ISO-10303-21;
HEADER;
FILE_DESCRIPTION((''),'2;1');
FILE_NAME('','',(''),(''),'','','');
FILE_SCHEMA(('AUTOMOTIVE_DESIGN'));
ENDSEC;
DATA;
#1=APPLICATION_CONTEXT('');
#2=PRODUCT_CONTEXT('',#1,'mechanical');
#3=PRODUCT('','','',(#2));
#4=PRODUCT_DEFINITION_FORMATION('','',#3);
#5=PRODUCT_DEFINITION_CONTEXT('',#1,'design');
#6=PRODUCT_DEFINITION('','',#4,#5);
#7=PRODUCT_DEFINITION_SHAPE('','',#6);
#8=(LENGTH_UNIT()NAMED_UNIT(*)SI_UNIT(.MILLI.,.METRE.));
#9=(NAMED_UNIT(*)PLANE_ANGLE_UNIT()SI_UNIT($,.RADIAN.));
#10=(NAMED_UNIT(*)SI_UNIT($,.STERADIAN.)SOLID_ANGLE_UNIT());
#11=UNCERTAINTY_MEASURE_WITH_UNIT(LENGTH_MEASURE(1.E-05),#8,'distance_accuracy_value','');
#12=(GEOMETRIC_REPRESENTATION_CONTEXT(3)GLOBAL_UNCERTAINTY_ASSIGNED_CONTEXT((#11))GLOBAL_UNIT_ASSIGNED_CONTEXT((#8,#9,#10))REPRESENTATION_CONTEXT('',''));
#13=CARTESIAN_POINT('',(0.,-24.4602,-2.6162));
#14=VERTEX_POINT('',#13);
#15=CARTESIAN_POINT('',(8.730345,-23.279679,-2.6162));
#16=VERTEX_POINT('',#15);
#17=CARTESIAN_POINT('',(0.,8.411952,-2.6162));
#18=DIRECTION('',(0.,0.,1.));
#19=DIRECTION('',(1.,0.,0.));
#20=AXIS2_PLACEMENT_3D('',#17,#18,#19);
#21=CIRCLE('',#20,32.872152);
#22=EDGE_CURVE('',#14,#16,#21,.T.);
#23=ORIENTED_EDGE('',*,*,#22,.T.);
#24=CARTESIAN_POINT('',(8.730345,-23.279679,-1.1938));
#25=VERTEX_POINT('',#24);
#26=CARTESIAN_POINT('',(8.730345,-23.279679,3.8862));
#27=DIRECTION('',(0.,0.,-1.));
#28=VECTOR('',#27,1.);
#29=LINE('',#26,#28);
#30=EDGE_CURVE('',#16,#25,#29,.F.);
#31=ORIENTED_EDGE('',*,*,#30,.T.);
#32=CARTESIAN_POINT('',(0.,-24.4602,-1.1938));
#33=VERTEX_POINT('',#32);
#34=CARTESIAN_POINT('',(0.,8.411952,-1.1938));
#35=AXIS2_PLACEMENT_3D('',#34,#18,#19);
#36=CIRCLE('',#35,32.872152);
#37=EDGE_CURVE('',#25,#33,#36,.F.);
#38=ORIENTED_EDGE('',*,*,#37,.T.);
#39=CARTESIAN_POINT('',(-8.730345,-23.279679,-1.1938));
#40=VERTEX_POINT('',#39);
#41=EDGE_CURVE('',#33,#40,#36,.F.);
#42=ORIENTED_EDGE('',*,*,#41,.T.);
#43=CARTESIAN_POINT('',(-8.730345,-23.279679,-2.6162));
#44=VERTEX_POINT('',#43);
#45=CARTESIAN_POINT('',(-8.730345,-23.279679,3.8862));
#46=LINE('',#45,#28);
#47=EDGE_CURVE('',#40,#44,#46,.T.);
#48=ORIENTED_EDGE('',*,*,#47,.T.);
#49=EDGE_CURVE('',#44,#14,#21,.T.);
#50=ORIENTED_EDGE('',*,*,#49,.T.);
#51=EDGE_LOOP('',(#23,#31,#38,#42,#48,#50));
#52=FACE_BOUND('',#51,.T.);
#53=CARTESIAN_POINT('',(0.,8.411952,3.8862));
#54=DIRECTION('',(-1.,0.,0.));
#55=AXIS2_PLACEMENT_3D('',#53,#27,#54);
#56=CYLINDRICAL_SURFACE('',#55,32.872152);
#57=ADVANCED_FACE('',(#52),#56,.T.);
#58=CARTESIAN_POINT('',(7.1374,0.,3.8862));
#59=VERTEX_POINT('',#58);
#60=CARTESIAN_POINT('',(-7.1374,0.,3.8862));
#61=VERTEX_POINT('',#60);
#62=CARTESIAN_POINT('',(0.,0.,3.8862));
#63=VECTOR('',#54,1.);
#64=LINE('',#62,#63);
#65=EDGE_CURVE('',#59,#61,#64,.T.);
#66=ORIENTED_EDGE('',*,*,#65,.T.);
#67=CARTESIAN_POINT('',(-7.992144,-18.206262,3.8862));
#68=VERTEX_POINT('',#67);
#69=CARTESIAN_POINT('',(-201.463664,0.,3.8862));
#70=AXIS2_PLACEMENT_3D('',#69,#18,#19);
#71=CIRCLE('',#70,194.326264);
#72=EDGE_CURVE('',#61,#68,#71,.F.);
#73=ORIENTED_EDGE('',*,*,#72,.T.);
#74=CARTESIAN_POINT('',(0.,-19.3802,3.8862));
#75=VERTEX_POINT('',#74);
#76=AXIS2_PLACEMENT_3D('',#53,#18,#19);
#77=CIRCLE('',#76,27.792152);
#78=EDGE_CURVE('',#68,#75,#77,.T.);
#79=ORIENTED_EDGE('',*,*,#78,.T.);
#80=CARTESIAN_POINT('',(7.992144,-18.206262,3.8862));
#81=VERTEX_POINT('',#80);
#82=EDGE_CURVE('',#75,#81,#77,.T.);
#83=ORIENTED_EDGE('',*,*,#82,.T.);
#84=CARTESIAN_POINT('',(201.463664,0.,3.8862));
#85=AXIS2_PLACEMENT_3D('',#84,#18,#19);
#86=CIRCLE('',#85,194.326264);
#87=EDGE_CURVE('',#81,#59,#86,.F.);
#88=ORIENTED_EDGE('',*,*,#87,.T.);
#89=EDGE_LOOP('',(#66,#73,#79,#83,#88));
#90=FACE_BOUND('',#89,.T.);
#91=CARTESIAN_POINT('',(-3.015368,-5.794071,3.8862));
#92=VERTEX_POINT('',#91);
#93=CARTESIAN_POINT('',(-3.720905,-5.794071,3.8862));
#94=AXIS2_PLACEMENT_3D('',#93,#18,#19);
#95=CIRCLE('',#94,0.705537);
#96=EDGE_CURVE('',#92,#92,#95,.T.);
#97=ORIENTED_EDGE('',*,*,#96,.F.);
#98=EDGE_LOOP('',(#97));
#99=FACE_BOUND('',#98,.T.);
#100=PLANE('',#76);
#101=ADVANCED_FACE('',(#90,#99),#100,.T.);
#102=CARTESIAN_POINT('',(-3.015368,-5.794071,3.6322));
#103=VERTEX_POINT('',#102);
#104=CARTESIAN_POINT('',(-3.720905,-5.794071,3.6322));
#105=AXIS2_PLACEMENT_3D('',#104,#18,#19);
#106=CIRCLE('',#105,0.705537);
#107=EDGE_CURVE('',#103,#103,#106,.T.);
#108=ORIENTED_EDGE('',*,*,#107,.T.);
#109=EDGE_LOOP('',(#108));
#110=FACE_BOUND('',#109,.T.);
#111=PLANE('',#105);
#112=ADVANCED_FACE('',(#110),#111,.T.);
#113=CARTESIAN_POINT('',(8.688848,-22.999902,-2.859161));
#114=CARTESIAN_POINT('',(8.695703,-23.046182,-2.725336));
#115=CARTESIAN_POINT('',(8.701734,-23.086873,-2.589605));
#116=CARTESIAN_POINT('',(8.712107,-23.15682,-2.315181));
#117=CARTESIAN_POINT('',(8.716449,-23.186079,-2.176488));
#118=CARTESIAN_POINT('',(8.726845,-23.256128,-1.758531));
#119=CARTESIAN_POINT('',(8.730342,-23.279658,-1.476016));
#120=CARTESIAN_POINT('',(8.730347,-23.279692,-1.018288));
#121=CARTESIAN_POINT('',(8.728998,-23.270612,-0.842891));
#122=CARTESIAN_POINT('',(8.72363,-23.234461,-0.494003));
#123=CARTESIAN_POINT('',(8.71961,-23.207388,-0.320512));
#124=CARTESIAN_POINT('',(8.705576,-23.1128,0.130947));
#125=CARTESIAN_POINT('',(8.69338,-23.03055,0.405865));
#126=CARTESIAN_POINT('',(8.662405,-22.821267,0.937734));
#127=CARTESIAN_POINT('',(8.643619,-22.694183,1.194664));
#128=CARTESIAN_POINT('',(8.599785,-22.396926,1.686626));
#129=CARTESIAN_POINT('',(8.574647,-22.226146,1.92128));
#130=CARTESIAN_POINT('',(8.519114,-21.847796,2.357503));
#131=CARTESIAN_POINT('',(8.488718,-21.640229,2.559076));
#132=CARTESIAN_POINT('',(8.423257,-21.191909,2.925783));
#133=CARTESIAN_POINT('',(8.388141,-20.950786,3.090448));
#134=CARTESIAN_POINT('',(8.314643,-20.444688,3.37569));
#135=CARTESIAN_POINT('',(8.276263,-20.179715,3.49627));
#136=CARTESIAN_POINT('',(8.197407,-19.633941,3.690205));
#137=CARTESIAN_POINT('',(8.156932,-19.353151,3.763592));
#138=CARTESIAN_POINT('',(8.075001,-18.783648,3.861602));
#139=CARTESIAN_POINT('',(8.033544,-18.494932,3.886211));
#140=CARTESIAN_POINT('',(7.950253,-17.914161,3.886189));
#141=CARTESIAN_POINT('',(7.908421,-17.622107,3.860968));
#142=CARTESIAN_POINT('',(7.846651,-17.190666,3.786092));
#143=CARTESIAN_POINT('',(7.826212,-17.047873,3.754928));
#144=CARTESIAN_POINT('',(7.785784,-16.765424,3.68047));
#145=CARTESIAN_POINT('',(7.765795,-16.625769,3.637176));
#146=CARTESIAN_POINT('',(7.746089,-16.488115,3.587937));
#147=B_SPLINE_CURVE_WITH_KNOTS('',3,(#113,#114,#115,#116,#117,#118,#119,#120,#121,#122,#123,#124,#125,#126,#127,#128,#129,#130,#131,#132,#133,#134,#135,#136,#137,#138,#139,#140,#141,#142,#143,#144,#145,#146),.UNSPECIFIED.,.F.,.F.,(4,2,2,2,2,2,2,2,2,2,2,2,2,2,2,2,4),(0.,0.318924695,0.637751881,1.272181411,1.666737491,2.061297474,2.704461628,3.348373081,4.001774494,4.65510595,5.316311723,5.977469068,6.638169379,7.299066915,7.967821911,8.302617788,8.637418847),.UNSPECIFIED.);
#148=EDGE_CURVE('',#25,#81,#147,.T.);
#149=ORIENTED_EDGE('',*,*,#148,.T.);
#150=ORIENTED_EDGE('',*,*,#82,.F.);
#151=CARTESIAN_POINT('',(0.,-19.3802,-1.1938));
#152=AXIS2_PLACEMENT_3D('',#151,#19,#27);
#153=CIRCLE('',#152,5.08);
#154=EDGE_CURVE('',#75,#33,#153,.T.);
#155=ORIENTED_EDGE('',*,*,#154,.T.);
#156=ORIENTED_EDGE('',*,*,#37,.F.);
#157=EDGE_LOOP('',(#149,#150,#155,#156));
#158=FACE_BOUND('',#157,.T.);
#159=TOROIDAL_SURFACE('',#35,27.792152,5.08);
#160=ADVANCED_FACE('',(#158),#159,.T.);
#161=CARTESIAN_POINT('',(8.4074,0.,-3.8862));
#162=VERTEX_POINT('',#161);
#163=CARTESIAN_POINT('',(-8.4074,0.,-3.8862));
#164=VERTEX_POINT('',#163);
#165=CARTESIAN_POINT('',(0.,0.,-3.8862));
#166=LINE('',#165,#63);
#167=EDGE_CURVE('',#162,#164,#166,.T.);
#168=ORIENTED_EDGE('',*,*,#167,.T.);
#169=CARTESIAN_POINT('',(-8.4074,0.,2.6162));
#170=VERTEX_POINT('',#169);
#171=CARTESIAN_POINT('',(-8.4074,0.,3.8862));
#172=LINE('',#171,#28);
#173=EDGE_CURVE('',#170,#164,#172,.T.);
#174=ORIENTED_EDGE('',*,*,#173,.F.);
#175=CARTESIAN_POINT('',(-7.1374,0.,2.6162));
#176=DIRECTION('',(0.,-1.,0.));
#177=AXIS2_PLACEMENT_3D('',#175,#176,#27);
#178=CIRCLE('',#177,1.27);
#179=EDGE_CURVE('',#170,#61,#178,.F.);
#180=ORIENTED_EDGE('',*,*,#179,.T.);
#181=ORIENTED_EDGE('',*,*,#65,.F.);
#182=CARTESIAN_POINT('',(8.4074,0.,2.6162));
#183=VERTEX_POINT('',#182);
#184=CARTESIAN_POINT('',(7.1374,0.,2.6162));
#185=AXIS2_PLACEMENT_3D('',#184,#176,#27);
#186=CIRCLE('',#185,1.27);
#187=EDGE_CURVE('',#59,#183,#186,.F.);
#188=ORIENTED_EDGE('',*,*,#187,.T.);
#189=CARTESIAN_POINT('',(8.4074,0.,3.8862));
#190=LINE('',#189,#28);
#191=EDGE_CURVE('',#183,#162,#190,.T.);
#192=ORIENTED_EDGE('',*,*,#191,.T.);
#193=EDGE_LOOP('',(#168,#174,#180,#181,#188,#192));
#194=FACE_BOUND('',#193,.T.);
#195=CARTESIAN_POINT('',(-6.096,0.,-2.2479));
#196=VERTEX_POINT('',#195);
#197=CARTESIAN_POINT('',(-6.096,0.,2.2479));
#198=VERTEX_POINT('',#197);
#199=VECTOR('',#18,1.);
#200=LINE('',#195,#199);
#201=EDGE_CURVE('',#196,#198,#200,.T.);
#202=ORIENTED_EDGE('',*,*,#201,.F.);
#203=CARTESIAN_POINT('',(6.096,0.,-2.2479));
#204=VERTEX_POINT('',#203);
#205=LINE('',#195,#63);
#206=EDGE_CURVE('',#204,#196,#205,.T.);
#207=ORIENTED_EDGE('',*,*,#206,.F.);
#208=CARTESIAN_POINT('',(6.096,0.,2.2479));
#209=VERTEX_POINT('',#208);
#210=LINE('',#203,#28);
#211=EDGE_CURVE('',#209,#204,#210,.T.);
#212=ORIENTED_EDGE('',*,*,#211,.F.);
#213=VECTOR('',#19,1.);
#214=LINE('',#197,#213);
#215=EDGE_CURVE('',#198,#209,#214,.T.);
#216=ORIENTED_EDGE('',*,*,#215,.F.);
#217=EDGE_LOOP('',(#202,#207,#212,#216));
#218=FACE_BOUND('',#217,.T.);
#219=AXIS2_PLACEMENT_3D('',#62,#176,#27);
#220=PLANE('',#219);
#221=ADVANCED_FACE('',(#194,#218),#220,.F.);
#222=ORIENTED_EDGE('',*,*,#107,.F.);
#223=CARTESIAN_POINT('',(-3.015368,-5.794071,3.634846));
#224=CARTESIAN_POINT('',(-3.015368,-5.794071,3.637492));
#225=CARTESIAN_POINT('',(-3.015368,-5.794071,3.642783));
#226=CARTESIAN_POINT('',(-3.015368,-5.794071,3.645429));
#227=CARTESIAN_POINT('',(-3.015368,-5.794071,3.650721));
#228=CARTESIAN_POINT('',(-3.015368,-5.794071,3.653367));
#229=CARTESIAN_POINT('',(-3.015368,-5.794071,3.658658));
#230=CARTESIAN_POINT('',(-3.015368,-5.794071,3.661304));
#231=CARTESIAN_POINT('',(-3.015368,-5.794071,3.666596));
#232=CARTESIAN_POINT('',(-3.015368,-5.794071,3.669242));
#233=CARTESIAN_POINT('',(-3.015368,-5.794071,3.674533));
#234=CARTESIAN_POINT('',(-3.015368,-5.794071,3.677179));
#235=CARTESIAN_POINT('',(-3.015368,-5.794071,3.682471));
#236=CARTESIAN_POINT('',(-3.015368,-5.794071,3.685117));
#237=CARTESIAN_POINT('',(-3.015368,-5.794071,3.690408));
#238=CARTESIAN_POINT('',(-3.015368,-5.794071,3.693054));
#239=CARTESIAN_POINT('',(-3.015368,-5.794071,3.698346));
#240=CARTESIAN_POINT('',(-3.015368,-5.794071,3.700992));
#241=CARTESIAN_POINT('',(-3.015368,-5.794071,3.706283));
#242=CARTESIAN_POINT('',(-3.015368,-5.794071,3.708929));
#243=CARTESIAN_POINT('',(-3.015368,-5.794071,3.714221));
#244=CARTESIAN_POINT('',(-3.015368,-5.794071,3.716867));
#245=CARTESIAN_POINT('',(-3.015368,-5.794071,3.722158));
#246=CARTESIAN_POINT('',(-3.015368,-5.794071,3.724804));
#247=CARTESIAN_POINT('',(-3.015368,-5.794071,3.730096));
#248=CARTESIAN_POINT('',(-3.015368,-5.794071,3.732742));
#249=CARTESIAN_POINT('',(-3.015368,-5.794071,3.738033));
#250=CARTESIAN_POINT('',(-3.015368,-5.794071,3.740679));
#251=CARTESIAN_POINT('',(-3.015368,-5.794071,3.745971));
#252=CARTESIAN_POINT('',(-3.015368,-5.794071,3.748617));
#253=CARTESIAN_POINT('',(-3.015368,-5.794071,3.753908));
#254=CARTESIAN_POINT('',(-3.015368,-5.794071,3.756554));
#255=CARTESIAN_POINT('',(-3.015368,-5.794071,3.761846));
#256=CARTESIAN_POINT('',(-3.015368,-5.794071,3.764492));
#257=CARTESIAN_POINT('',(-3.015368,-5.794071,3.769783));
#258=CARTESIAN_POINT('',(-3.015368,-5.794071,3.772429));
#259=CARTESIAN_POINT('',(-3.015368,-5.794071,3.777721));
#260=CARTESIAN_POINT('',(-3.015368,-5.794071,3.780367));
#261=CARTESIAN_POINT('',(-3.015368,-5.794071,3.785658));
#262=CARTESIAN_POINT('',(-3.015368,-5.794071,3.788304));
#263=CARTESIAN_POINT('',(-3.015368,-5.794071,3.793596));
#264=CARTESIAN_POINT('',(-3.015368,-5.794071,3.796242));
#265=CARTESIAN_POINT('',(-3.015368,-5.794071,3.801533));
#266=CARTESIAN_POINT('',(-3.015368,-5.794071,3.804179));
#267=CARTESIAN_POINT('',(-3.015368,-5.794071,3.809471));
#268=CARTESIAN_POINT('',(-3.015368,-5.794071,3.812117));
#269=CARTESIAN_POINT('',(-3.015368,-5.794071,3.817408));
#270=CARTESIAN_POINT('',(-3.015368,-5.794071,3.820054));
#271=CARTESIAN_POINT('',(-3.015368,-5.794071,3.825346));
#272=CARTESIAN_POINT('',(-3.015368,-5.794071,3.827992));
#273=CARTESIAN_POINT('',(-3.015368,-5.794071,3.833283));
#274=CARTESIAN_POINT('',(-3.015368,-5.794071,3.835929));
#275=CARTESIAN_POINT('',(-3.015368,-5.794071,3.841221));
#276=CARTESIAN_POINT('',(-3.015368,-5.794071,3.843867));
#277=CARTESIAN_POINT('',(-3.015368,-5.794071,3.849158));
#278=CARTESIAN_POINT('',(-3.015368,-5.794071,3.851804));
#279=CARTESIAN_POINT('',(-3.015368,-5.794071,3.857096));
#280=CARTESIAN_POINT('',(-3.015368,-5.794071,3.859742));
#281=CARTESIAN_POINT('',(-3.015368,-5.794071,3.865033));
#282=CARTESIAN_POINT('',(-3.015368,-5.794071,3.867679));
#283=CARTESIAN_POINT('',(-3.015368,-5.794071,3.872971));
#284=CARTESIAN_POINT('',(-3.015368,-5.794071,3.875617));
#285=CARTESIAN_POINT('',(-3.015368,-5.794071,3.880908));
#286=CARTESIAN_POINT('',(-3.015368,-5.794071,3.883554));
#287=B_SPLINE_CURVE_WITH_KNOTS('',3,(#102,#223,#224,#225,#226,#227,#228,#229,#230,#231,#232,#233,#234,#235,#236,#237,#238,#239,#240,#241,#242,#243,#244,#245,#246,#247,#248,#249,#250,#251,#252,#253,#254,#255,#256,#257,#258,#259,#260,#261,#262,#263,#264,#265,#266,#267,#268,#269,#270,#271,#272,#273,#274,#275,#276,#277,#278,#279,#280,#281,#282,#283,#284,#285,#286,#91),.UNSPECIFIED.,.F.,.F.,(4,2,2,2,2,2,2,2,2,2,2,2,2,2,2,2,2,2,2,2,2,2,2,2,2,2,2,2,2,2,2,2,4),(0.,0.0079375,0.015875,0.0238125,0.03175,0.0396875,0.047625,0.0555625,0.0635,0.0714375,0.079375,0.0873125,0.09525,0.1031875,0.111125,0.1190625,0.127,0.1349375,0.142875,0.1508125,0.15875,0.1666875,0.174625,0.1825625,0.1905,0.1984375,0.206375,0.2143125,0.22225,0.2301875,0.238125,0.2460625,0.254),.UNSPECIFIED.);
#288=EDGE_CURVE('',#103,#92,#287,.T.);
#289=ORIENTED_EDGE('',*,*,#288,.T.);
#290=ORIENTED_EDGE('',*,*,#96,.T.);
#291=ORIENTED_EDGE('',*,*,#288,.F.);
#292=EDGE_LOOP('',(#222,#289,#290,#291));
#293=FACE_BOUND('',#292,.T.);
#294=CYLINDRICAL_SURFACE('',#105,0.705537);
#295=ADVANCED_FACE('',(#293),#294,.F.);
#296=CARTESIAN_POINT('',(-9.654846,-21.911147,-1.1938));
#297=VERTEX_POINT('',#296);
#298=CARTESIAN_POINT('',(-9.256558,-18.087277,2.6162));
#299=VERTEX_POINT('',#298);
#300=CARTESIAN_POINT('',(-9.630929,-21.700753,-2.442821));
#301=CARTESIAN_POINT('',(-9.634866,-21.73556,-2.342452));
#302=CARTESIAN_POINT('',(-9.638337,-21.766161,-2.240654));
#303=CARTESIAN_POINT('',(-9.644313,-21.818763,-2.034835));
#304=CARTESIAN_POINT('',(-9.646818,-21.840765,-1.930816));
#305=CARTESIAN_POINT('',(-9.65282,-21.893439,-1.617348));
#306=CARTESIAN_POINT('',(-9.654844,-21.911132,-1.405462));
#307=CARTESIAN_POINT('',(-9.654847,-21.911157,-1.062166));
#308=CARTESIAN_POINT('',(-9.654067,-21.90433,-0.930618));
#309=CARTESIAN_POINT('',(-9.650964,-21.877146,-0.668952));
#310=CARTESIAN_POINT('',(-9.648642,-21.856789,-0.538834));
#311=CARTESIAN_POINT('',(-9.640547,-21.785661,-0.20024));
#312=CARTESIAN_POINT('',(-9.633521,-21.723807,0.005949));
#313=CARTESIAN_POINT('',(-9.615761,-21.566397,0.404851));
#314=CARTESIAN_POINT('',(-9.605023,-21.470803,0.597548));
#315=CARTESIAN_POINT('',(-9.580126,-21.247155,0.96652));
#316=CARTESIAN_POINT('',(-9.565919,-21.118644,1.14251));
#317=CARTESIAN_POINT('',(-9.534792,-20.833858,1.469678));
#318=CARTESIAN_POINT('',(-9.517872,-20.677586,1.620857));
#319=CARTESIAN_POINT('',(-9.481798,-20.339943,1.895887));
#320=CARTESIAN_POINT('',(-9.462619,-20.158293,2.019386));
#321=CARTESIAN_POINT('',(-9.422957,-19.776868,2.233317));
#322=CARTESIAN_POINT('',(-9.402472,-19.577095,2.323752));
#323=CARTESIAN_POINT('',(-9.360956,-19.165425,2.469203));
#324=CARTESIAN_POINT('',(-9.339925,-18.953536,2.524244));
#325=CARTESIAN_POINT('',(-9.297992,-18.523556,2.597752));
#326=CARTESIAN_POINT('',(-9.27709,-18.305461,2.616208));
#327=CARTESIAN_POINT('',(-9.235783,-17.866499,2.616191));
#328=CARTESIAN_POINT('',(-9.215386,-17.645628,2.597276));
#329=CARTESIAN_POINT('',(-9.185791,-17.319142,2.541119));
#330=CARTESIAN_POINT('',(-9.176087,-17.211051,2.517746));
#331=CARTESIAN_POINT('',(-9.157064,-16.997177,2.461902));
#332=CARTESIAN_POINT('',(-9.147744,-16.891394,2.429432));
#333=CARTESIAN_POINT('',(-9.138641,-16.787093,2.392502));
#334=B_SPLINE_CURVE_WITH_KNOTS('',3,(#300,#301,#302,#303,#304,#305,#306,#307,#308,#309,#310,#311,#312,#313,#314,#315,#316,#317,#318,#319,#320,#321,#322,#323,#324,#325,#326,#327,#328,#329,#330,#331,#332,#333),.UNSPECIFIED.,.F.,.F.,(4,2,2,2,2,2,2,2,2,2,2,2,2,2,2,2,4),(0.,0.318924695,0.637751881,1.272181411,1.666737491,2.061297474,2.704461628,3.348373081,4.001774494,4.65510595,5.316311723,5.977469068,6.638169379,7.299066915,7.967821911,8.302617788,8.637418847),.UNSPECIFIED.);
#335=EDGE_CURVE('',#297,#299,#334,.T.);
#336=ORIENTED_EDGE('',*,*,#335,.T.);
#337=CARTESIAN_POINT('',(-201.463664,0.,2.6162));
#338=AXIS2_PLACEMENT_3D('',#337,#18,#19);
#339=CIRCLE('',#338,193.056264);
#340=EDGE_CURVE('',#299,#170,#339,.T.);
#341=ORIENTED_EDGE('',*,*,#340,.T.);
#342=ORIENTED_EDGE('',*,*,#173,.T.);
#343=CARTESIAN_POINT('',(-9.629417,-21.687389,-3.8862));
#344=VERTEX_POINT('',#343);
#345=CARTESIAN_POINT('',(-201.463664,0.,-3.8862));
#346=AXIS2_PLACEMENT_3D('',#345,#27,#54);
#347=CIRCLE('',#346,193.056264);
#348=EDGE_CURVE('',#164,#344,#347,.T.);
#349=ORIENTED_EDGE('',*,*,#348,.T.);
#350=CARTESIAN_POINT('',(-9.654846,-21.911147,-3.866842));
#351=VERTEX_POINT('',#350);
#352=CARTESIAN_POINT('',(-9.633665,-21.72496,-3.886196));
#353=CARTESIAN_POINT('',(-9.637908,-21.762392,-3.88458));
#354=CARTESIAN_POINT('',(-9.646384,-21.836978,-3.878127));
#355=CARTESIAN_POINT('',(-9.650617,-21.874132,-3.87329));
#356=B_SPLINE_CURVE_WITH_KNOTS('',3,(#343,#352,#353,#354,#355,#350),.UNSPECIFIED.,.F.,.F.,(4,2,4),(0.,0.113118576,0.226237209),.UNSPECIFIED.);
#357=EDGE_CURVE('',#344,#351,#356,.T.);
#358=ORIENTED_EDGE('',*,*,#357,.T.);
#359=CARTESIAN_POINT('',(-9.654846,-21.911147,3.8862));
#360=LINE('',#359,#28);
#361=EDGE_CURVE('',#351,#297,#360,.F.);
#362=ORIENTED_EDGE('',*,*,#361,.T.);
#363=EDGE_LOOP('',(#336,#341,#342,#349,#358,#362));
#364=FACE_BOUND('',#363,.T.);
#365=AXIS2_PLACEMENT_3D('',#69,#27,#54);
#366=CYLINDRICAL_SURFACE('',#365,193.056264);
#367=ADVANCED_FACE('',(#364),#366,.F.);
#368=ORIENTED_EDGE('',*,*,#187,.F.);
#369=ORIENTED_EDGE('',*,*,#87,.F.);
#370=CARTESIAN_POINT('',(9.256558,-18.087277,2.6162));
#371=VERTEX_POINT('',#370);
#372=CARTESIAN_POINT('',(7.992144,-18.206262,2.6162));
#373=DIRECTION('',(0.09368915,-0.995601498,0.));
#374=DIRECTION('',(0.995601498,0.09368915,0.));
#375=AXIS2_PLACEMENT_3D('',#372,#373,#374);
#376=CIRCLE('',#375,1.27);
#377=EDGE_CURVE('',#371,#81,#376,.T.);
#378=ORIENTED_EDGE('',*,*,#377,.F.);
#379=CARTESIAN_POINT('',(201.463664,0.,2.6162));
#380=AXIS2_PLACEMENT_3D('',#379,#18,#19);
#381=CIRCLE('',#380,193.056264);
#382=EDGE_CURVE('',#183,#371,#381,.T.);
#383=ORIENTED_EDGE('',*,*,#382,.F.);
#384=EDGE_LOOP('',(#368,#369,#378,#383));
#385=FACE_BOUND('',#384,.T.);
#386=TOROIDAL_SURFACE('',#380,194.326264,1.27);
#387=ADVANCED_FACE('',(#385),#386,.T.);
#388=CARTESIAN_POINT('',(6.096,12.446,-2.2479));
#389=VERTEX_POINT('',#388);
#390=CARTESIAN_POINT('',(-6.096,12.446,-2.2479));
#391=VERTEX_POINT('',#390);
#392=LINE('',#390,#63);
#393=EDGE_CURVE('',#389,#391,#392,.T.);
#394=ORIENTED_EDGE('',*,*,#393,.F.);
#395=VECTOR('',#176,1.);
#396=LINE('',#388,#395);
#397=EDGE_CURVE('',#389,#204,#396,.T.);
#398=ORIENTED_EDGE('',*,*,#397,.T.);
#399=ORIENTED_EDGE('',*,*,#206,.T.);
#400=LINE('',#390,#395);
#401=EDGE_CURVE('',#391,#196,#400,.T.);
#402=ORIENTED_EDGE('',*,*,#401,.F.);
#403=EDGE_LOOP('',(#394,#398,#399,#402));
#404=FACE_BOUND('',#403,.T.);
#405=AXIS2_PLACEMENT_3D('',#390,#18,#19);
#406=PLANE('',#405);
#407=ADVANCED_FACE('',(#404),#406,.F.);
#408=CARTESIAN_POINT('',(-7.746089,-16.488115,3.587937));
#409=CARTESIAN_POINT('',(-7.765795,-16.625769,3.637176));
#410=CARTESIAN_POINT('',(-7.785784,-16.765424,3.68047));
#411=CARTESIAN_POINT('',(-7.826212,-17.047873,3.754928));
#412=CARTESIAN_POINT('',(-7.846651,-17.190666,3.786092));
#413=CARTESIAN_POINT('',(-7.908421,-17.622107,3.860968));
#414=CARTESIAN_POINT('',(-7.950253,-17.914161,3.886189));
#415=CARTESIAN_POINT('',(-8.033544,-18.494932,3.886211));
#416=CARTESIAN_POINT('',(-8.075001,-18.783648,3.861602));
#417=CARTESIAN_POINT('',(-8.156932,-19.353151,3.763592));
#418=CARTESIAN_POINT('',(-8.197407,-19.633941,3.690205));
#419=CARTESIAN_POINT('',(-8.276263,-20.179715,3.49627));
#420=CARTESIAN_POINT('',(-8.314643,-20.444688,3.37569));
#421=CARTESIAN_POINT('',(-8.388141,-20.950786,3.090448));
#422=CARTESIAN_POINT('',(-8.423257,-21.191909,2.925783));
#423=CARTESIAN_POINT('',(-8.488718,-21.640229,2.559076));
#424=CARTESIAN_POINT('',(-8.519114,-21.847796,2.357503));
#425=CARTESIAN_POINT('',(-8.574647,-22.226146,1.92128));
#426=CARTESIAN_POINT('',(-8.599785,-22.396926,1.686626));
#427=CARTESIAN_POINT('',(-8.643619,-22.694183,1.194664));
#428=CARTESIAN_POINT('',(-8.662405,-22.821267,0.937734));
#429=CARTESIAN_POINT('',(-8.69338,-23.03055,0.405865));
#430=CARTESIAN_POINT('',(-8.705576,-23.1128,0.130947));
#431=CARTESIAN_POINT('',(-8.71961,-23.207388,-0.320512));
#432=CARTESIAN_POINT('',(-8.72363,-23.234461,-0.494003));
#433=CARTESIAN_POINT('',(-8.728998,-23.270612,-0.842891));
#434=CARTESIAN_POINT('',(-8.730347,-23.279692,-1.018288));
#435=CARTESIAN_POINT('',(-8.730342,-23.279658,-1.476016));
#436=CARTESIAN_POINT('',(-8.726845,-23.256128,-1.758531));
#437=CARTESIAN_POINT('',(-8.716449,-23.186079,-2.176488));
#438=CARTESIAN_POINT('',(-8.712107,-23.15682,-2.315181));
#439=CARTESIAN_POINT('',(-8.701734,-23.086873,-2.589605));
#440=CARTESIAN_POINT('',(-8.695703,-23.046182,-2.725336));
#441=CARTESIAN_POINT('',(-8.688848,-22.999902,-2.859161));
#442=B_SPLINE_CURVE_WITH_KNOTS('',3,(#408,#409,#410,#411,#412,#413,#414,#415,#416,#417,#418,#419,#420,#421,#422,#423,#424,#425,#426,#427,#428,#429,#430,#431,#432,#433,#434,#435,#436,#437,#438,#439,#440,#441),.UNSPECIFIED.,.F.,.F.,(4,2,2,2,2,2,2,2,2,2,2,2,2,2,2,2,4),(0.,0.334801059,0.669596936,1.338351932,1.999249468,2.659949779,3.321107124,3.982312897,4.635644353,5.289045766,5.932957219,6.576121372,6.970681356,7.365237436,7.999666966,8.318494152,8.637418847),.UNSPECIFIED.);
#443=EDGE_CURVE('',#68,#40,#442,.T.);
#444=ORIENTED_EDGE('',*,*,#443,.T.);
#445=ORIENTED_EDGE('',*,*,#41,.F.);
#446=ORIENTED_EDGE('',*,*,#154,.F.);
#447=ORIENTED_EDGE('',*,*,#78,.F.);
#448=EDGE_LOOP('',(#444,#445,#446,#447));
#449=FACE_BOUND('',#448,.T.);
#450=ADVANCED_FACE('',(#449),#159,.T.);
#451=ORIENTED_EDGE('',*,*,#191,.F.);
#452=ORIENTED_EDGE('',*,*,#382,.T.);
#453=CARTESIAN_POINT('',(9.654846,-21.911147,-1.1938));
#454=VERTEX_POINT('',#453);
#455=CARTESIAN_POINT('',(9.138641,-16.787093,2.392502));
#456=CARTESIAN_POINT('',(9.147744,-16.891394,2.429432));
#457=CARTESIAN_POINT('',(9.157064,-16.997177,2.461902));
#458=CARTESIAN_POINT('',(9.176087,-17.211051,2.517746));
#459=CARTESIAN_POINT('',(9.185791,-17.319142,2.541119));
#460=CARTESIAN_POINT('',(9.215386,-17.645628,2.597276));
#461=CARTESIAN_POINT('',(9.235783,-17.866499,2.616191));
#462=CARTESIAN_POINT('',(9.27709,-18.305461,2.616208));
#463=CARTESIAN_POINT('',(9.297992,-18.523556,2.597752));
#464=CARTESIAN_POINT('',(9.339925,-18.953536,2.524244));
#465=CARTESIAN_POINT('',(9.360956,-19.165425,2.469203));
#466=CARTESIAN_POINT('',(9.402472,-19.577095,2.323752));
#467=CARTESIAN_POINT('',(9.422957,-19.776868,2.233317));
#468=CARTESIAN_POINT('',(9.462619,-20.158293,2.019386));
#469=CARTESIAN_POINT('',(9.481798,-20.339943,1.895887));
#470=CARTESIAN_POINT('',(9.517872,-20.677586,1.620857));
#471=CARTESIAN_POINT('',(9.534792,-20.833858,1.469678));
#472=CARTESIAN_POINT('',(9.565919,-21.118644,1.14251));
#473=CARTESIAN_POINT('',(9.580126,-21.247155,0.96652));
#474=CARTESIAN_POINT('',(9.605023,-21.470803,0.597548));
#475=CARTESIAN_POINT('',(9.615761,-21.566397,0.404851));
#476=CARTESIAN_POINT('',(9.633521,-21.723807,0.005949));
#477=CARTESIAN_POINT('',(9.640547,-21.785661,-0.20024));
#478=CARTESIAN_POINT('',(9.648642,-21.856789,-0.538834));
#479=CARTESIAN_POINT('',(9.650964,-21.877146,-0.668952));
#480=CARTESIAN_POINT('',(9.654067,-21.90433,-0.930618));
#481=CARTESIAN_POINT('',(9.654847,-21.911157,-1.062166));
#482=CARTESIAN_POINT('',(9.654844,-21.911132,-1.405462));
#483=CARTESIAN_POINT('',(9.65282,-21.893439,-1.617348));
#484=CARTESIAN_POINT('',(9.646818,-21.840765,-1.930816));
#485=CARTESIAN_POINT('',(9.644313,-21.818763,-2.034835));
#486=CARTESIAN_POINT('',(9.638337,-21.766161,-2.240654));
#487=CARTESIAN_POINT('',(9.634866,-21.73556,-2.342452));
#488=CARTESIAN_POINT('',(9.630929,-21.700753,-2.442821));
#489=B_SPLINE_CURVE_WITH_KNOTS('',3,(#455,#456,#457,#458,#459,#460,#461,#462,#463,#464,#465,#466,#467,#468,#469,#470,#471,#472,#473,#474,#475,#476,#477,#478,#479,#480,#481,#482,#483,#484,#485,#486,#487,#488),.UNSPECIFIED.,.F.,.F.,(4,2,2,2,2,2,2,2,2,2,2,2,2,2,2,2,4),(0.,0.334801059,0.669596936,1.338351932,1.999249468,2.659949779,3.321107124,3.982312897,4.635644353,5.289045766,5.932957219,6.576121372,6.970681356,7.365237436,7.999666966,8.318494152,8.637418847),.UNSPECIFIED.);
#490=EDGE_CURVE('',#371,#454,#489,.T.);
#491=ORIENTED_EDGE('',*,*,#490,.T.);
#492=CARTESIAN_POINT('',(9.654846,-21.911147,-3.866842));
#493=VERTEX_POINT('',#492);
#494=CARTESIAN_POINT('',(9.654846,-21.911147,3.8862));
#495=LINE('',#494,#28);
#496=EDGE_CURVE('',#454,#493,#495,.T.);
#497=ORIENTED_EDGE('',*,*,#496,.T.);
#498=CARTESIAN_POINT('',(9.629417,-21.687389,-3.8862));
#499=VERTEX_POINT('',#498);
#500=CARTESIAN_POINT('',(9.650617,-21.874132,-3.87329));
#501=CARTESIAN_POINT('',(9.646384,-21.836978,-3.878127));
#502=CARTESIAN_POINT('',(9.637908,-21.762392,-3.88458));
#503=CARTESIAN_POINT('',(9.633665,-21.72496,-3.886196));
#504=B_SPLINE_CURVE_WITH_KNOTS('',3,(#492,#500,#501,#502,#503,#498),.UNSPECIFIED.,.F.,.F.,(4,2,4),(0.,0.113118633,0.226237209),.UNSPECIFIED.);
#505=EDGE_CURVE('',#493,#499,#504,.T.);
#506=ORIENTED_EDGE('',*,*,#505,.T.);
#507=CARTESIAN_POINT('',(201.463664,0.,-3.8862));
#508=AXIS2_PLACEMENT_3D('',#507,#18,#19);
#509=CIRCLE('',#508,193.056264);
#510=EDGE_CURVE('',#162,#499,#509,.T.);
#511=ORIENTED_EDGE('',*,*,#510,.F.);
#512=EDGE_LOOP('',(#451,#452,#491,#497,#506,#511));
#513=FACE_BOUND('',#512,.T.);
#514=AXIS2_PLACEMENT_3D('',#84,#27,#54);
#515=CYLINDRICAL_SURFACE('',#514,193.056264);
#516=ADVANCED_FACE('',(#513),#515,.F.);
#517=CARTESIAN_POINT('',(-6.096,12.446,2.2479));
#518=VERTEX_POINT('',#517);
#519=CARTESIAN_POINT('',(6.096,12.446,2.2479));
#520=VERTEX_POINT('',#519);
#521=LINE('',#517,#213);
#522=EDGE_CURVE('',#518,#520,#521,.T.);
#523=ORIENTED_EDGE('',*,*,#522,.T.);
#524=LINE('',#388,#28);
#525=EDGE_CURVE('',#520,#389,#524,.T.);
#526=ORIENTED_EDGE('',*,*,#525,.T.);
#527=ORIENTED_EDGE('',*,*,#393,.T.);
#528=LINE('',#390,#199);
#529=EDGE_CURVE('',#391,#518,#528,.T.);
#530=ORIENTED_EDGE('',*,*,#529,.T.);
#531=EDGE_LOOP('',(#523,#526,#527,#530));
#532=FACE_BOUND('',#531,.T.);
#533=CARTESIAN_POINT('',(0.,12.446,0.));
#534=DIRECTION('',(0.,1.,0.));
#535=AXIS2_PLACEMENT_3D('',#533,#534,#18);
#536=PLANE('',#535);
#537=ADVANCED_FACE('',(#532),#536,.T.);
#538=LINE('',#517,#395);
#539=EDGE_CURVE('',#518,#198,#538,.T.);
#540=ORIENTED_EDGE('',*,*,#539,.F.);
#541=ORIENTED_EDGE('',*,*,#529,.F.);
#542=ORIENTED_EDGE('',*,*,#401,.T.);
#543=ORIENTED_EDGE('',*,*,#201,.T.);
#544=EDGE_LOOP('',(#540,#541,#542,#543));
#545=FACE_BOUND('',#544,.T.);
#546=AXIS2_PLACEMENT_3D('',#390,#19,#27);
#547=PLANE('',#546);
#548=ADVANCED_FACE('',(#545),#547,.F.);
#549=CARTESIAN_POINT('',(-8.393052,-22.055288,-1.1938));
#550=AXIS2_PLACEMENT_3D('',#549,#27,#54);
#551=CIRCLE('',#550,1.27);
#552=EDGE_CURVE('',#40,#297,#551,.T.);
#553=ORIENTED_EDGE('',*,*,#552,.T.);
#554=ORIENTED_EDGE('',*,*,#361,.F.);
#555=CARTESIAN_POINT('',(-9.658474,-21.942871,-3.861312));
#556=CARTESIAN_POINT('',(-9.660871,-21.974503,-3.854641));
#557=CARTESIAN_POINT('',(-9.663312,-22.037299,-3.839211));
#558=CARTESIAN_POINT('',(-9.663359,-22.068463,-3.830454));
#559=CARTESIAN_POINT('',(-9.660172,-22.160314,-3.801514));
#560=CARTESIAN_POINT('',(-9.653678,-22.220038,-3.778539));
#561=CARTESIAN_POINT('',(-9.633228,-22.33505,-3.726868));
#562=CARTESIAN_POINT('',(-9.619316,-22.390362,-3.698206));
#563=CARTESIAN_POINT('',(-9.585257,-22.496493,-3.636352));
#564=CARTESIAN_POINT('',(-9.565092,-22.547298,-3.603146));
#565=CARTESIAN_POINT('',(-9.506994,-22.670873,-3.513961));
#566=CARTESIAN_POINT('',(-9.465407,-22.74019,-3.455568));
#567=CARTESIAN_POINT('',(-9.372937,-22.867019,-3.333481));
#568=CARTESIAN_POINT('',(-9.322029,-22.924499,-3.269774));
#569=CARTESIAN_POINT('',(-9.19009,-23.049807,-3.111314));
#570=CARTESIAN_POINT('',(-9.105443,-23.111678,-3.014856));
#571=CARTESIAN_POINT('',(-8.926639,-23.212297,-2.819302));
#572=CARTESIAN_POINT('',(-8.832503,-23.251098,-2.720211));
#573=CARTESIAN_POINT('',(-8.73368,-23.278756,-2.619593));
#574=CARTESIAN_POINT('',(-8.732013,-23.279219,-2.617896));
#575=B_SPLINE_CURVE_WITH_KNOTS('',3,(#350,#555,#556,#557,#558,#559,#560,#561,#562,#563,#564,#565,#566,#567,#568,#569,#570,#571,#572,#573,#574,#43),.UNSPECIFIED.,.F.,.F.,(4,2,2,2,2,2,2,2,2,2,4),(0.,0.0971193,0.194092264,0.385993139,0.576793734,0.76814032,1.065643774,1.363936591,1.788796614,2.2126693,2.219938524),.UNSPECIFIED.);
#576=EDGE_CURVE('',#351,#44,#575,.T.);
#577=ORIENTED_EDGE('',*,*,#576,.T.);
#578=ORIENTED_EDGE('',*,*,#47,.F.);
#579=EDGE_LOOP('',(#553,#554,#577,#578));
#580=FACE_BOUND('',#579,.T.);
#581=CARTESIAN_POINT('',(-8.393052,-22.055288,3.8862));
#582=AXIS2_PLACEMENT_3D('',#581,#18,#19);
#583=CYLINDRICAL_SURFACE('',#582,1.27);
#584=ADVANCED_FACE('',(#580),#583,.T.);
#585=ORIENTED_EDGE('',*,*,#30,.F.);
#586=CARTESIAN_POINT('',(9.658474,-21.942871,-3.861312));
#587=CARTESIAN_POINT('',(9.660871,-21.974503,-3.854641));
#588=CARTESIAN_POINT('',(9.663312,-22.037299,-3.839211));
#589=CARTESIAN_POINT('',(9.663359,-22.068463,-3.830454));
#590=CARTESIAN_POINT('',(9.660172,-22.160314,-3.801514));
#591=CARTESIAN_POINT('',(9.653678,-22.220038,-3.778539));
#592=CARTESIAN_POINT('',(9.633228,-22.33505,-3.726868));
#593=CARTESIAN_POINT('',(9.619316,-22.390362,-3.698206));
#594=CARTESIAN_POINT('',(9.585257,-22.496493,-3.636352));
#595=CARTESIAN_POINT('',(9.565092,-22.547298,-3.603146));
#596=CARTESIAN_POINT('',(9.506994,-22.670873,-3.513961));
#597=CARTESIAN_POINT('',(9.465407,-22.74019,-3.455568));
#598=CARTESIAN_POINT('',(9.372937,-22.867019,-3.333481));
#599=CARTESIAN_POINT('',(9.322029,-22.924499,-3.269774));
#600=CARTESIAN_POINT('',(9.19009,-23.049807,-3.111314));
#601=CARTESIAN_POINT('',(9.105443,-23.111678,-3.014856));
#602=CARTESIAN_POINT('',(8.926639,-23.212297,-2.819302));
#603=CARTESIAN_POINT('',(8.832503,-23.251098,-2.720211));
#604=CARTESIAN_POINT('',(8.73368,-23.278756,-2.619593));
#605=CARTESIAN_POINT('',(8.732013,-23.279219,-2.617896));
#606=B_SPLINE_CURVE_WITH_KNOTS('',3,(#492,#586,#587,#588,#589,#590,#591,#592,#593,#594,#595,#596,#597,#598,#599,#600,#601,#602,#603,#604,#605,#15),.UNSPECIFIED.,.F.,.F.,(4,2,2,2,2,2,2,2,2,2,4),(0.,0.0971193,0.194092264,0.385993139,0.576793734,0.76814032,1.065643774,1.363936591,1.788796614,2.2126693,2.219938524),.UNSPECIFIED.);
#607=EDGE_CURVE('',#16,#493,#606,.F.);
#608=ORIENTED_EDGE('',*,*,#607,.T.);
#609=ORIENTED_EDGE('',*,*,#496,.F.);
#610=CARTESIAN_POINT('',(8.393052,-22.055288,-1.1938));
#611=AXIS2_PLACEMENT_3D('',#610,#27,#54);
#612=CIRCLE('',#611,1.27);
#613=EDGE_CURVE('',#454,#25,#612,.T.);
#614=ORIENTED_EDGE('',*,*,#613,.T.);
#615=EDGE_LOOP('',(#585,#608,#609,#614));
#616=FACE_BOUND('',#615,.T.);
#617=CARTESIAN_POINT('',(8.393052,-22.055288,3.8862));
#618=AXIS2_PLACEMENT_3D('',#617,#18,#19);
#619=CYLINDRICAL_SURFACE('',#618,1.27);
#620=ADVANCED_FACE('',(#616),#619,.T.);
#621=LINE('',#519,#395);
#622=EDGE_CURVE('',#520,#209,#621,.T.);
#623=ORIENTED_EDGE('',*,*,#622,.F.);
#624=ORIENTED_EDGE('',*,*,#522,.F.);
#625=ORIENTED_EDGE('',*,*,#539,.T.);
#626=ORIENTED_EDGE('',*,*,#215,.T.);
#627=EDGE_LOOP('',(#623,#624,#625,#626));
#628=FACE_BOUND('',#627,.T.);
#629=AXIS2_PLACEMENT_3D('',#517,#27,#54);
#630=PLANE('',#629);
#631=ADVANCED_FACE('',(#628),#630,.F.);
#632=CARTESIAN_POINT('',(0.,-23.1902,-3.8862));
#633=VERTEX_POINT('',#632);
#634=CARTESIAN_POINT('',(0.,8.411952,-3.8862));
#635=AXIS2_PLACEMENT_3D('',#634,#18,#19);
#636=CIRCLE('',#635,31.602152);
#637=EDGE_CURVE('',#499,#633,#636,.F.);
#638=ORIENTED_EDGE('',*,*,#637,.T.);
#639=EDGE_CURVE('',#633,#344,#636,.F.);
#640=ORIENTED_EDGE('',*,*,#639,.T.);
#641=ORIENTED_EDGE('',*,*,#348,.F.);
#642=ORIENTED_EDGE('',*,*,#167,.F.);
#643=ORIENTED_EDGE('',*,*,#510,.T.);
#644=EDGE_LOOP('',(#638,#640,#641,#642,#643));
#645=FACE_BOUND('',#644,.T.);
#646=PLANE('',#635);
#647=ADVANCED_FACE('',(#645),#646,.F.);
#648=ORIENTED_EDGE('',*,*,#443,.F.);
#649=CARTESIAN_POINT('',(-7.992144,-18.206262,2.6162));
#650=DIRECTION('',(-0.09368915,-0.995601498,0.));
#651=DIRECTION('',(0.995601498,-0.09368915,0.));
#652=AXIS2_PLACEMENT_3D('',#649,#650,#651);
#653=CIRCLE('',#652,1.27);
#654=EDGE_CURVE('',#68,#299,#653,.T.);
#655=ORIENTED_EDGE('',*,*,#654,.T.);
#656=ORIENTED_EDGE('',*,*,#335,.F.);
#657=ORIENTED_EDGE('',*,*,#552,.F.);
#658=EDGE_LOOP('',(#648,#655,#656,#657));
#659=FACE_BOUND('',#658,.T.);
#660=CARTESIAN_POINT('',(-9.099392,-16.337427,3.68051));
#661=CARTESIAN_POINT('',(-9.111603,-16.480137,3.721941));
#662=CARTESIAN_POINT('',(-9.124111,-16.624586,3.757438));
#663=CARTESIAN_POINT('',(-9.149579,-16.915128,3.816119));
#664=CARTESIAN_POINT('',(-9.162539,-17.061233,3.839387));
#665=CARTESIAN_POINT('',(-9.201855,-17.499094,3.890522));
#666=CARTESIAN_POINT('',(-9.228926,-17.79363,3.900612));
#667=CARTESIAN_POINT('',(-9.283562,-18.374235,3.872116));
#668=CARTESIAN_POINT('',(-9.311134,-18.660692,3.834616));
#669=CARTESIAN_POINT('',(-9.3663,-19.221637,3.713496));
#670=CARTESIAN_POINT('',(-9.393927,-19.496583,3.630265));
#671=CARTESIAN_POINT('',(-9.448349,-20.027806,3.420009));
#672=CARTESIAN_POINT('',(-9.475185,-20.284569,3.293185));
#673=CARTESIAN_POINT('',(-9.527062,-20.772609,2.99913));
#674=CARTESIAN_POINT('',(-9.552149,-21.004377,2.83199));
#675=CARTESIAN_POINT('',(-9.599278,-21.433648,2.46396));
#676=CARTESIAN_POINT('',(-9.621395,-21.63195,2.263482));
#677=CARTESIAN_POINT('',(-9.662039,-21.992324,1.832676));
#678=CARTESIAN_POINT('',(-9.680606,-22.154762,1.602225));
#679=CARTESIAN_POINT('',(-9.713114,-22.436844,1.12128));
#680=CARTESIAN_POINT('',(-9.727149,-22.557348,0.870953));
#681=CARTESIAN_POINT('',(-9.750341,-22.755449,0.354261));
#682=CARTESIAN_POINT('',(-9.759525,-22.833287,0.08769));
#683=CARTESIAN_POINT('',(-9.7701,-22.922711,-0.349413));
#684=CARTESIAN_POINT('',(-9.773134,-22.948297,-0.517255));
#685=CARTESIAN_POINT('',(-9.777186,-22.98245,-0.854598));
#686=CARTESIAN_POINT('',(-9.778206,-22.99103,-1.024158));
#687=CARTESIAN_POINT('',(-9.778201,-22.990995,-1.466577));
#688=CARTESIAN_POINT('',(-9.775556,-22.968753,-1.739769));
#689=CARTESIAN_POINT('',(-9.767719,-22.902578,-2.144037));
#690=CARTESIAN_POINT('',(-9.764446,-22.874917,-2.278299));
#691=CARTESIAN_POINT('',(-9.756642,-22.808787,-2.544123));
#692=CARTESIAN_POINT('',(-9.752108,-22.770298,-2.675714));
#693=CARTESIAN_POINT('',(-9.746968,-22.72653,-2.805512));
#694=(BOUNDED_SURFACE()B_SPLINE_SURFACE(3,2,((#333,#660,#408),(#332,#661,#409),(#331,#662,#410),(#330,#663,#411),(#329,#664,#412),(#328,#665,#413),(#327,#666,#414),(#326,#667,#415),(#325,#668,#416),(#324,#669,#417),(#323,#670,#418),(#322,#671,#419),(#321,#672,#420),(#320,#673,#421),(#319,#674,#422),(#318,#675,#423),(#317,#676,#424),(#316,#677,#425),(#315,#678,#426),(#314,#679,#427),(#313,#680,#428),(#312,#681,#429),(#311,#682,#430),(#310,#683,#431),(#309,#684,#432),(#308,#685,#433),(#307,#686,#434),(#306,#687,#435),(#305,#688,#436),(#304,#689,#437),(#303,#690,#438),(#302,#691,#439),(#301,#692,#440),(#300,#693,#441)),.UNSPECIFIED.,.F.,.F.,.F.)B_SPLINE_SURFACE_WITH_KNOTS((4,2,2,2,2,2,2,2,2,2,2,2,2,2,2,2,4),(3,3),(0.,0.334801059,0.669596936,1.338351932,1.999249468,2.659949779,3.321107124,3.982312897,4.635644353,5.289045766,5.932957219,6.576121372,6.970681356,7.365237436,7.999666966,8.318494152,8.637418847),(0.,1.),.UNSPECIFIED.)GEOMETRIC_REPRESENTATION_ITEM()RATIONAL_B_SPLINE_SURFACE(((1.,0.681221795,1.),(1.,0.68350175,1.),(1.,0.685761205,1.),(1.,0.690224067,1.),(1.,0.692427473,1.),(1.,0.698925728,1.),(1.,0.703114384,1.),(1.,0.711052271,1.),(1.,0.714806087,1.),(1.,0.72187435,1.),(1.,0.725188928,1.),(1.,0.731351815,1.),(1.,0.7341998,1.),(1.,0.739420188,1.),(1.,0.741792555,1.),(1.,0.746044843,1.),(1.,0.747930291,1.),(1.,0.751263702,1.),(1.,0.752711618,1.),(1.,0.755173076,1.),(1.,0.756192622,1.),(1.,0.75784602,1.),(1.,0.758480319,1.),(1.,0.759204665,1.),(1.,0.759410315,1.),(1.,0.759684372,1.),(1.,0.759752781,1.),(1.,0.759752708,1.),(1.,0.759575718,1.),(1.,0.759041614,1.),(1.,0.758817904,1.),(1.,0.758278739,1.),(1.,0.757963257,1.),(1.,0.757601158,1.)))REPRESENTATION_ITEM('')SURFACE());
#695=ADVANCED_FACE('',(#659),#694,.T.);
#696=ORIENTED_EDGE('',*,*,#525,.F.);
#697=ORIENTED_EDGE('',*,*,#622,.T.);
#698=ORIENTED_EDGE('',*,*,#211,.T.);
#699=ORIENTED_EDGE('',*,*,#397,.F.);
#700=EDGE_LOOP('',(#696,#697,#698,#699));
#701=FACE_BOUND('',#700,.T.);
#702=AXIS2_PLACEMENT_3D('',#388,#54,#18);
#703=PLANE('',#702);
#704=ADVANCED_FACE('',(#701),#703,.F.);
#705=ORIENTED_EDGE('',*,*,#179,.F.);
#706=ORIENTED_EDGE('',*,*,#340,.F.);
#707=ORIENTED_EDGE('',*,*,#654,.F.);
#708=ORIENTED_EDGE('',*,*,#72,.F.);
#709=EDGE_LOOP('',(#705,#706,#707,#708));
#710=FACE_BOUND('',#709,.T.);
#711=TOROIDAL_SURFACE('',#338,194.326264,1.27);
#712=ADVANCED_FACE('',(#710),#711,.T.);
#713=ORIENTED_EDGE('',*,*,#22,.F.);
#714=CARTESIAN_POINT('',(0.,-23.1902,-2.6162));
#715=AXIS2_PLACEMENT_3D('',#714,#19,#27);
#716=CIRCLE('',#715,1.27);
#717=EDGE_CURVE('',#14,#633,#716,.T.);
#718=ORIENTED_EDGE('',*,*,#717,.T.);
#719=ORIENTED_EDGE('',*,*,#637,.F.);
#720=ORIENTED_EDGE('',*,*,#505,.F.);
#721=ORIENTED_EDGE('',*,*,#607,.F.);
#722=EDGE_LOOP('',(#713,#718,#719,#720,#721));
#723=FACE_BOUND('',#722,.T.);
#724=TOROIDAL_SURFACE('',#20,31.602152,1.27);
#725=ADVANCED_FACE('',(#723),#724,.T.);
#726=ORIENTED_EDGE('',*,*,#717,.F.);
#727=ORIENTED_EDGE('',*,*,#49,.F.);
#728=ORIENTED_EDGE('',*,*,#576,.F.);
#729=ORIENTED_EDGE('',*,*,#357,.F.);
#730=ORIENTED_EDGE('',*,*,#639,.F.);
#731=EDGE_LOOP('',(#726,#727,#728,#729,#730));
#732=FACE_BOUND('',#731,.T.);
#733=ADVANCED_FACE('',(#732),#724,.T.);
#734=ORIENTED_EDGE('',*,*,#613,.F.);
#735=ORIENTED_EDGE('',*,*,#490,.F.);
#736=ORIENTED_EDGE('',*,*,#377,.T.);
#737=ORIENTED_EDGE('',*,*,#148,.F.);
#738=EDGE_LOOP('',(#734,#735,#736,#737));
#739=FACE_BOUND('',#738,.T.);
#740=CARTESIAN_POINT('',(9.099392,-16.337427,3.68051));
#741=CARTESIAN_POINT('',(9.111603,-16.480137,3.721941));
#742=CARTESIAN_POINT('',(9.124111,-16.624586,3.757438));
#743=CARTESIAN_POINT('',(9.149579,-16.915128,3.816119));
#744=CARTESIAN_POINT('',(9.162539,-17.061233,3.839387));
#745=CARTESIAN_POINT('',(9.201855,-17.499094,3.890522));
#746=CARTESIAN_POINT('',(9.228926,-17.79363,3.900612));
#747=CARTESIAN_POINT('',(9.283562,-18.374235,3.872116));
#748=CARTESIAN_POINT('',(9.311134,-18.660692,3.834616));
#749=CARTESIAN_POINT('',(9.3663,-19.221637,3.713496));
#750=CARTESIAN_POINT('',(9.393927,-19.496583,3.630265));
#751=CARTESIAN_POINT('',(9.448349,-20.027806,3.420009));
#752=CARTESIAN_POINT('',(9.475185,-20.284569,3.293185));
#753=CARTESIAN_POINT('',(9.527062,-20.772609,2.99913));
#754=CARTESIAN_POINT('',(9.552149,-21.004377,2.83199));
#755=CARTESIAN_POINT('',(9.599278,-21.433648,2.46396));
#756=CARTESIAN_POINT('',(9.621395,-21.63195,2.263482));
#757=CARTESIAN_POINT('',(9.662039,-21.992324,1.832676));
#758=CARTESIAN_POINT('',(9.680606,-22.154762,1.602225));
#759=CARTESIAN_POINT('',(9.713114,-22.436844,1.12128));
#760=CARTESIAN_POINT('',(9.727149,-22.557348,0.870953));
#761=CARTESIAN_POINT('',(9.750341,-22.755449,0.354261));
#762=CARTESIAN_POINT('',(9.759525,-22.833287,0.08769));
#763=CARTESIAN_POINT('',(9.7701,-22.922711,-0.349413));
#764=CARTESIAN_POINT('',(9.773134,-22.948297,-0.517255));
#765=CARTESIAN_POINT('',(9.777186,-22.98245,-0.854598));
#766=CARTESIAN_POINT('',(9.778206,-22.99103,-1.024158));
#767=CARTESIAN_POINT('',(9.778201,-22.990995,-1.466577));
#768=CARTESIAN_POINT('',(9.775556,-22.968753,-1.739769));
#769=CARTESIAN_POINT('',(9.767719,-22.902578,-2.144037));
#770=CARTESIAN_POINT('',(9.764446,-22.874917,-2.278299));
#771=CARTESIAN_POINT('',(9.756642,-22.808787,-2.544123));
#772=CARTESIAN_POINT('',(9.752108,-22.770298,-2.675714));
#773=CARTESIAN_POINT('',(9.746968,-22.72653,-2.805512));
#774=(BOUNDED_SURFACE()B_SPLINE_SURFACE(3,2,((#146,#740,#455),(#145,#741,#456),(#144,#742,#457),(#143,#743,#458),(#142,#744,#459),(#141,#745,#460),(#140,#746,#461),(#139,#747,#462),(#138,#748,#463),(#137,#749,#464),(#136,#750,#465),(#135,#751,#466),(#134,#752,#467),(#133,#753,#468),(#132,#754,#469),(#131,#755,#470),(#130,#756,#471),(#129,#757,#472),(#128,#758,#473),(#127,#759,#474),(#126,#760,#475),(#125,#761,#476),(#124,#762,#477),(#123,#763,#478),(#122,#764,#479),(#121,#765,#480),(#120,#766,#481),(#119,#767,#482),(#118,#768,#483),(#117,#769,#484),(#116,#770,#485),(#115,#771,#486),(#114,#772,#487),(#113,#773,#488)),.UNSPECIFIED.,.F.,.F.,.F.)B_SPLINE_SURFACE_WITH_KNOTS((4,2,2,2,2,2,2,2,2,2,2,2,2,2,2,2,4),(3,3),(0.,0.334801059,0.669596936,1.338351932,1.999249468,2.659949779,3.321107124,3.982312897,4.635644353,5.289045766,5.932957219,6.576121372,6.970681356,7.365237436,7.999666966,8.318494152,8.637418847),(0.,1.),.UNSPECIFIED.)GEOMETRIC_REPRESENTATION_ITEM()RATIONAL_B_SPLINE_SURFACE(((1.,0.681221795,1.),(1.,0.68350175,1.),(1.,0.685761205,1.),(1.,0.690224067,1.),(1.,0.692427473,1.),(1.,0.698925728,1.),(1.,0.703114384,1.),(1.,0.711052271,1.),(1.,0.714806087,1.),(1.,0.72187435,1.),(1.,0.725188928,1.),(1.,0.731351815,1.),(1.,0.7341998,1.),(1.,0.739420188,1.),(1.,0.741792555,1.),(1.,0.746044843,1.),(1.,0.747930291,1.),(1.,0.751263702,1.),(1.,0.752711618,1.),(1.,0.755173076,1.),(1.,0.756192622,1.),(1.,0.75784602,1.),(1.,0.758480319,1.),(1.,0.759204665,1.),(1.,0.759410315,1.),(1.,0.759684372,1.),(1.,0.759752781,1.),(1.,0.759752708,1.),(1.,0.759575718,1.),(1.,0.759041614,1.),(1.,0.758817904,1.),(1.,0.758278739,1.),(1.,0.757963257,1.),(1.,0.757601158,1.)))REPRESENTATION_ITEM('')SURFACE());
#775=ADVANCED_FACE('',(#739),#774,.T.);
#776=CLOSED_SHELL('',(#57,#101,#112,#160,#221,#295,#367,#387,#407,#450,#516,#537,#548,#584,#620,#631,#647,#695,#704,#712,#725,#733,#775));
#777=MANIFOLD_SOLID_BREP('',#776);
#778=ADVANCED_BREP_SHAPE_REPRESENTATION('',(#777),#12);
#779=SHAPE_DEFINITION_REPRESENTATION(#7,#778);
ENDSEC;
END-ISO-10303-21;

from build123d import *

# Parameters (mm, degrees)
SKETCH1_W           = 12.192
SKETCH1_H           = 4.4958
BOSS_EXTRUDE1_DEPTH = 12.446
BOSS_EXTRUDE2_DEPTH = 3.8862
FILLET1_R           = 5.08
FILLET2_R           = 1.27
SKETCH3_R           = 0.705537126
CUT_EXTRUDE1_DEPTH  = 0.254


# Read off the part's stored shape, not the designer's step: Mirror1
with BuildPart() as part:
    # Sketch1 → Boss-Extrude1 (new body)
    with BuildSketch(Plane(origin=(0, 0, 0), x_dir=(1, 0, 0), z_dir=(0, 1, 0))):
        Rectangle(SKETCH1_W, SKETCH1_H)
    extrude(amount=BOSS_EXTRUDE1_DEPTH)

    # Sketch2 → Boss-Extrude2 (add, symmetric)
    with BuildSketch(Plane.XY):
        with BuildLine():
            Line((0, 0), (-8.4074, 0))
            ThreePointArc((-8.4074, 0), (-8.750605066, -11.506432361), (-9.779, -22.971953685))
            ThreePointArc((-9.779, -22.971953685), (-4.945799179, -24.086008668), (0, -24.4602))
            Line((0, -24.4602), (0, 0))
        make_face()
    extrude(amount=BOSS_EXTRUDE2_DEPTH, both=True)

    # Fillet1
    fillet1_edges = [part.edges().sort_by_distance(p)[0] for p in [
        (-4.945799179, -24.086008668, 3.8862),
    ]]
    fillet(fillet1_edges, radius=FILLET1_R)

    # Fillet2
    fillet2_edges = [part.edges().sort_by_distance(p)[0] for p in [
        (-4.945799179, -24.086008668, -3.8862),
        (-8.61315874, -8.910874841, 3.8862),
        (-9.779, -22.971953685, -2.54),
        (-9.601797377, -21.441669836, 2.422651407),
    ]]
    fillet(fillet2_edges, radius=FILLET2_R)

    # Mirror1: part across plane


with BuildPart() as part_1:
    add(part.part)
    add(part.part.mirror(Plane(origin=(0, 0, 0), x_dir=(0, 0, 1), z_dir=(1, 0, 0))))

    # Sketch3 → Cut-Extrude1 (cut)
    with BuildSketch(Plane.XY.offset(3.8862)):
        with Locations((-3.72090503, -5.794071086)):
            Circle(SKETCH3_R)
    extrude(amount=-CUT_EXTRUDE1_DEPTH, mode=Mode.SUBTRACT)


solid = part_1.part
